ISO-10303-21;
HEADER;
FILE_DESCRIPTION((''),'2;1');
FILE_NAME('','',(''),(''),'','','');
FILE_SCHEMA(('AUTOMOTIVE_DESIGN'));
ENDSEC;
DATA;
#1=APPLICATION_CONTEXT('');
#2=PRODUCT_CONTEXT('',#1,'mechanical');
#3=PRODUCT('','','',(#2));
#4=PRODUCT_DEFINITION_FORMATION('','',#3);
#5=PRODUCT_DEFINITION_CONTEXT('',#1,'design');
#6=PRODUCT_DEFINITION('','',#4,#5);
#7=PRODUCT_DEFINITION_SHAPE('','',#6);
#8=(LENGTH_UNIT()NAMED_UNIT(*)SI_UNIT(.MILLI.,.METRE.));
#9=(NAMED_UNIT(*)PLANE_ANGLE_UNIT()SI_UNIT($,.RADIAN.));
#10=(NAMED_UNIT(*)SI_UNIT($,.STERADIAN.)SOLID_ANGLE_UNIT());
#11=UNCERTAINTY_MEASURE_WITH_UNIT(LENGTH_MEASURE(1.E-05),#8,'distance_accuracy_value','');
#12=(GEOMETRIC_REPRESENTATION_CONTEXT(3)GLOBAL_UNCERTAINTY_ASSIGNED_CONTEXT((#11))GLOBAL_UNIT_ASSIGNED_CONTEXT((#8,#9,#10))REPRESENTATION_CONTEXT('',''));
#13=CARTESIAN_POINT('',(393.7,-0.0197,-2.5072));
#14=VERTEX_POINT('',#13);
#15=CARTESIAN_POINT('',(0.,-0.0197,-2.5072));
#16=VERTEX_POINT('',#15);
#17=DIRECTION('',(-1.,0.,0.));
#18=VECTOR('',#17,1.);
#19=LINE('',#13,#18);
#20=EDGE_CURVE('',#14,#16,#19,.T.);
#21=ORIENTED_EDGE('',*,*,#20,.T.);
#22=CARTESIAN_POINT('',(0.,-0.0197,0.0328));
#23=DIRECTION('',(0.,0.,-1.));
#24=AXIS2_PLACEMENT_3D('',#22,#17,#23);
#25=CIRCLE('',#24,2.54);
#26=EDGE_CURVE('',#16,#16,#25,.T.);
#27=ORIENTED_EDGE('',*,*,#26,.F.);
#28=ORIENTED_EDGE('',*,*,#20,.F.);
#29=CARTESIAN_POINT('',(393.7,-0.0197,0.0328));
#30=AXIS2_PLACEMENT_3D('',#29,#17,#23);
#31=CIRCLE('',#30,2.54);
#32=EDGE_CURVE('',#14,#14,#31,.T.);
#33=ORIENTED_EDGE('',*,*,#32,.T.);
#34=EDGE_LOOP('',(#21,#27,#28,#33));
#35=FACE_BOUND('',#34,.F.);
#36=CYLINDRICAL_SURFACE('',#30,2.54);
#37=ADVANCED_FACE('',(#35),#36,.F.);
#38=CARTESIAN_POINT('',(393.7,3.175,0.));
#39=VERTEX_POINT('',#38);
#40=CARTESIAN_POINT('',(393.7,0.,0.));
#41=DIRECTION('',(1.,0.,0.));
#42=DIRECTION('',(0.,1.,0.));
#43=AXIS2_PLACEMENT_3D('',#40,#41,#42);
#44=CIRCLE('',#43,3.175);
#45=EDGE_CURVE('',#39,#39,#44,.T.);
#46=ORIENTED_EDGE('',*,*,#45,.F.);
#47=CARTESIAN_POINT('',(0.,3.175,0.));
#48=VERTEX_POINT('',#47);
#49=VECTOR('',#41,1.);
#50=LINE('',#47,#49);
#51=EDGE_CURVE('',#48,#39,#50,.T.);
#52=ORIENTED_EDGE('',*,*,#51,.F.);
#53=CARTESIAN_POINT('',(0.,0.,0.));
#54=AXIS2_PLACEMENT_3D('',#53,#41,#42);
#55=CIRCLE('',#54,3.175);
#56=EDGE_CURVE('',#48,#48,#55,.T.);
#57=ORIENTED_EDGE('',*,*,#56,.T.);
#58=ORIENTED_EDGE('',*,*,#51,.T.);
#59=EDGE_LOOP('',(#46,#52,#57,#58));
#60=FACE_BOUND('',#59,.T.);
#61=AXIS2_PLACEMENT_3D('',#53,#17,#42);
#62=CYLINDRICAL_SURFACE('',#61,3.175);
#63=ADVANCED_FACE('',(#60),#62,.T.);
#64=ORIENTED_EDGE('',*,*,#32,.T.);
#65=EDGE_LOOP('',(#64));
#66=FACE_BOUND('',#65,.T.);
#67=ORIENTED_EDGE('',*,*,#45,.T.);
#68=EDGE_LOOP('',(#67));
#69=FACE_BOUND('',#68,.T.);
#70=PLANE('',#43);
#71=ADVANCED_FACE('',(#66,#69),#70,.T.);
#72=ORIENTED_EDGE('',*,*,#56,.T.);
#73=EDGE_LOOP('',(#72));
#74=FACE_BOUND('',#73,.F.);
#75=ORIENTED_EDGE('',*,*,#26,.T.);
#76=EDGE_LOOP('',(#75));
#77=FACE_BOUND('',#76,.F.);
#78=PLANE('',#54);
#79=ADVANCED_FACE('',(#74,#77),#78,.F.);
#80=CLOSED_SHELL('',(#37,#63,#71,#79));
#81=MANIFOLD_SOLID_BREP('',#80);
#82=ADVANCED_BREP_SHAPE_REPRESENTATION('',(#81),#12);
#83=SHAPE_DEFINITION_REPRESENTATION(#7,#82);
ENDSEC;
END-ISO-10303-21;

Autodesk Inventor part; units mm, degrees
ref_plane "YZ Plane" through (0, 0, 0) normal (1, 0, 0) x (0, 1, 0)
ref_plane "XZ Plane" through (0, 0, 0) normal (0, 1, 0) x (-1, 0, 0)
ref_plane "XY Plane" through (0, 0, 0) normal (0, 0, 1) x (1, 0, 0)
sketch "Sketch1" plane through (0, 0, 0) normal (1, 0, 0) x (0, 1, 0)
  circle A0 centre (0, 0) radius 3.175
  dimension "d0" = 6.35
extrude "Extrusion1" add sketch "Sketch1" along normal blind 393.7
hole "Hole1" at (393.7, -0.0197, 0.0328) direction (-1, 0, 0) diameter 5.08 end through all
properties part number "Plastic Tube (15.5)"
